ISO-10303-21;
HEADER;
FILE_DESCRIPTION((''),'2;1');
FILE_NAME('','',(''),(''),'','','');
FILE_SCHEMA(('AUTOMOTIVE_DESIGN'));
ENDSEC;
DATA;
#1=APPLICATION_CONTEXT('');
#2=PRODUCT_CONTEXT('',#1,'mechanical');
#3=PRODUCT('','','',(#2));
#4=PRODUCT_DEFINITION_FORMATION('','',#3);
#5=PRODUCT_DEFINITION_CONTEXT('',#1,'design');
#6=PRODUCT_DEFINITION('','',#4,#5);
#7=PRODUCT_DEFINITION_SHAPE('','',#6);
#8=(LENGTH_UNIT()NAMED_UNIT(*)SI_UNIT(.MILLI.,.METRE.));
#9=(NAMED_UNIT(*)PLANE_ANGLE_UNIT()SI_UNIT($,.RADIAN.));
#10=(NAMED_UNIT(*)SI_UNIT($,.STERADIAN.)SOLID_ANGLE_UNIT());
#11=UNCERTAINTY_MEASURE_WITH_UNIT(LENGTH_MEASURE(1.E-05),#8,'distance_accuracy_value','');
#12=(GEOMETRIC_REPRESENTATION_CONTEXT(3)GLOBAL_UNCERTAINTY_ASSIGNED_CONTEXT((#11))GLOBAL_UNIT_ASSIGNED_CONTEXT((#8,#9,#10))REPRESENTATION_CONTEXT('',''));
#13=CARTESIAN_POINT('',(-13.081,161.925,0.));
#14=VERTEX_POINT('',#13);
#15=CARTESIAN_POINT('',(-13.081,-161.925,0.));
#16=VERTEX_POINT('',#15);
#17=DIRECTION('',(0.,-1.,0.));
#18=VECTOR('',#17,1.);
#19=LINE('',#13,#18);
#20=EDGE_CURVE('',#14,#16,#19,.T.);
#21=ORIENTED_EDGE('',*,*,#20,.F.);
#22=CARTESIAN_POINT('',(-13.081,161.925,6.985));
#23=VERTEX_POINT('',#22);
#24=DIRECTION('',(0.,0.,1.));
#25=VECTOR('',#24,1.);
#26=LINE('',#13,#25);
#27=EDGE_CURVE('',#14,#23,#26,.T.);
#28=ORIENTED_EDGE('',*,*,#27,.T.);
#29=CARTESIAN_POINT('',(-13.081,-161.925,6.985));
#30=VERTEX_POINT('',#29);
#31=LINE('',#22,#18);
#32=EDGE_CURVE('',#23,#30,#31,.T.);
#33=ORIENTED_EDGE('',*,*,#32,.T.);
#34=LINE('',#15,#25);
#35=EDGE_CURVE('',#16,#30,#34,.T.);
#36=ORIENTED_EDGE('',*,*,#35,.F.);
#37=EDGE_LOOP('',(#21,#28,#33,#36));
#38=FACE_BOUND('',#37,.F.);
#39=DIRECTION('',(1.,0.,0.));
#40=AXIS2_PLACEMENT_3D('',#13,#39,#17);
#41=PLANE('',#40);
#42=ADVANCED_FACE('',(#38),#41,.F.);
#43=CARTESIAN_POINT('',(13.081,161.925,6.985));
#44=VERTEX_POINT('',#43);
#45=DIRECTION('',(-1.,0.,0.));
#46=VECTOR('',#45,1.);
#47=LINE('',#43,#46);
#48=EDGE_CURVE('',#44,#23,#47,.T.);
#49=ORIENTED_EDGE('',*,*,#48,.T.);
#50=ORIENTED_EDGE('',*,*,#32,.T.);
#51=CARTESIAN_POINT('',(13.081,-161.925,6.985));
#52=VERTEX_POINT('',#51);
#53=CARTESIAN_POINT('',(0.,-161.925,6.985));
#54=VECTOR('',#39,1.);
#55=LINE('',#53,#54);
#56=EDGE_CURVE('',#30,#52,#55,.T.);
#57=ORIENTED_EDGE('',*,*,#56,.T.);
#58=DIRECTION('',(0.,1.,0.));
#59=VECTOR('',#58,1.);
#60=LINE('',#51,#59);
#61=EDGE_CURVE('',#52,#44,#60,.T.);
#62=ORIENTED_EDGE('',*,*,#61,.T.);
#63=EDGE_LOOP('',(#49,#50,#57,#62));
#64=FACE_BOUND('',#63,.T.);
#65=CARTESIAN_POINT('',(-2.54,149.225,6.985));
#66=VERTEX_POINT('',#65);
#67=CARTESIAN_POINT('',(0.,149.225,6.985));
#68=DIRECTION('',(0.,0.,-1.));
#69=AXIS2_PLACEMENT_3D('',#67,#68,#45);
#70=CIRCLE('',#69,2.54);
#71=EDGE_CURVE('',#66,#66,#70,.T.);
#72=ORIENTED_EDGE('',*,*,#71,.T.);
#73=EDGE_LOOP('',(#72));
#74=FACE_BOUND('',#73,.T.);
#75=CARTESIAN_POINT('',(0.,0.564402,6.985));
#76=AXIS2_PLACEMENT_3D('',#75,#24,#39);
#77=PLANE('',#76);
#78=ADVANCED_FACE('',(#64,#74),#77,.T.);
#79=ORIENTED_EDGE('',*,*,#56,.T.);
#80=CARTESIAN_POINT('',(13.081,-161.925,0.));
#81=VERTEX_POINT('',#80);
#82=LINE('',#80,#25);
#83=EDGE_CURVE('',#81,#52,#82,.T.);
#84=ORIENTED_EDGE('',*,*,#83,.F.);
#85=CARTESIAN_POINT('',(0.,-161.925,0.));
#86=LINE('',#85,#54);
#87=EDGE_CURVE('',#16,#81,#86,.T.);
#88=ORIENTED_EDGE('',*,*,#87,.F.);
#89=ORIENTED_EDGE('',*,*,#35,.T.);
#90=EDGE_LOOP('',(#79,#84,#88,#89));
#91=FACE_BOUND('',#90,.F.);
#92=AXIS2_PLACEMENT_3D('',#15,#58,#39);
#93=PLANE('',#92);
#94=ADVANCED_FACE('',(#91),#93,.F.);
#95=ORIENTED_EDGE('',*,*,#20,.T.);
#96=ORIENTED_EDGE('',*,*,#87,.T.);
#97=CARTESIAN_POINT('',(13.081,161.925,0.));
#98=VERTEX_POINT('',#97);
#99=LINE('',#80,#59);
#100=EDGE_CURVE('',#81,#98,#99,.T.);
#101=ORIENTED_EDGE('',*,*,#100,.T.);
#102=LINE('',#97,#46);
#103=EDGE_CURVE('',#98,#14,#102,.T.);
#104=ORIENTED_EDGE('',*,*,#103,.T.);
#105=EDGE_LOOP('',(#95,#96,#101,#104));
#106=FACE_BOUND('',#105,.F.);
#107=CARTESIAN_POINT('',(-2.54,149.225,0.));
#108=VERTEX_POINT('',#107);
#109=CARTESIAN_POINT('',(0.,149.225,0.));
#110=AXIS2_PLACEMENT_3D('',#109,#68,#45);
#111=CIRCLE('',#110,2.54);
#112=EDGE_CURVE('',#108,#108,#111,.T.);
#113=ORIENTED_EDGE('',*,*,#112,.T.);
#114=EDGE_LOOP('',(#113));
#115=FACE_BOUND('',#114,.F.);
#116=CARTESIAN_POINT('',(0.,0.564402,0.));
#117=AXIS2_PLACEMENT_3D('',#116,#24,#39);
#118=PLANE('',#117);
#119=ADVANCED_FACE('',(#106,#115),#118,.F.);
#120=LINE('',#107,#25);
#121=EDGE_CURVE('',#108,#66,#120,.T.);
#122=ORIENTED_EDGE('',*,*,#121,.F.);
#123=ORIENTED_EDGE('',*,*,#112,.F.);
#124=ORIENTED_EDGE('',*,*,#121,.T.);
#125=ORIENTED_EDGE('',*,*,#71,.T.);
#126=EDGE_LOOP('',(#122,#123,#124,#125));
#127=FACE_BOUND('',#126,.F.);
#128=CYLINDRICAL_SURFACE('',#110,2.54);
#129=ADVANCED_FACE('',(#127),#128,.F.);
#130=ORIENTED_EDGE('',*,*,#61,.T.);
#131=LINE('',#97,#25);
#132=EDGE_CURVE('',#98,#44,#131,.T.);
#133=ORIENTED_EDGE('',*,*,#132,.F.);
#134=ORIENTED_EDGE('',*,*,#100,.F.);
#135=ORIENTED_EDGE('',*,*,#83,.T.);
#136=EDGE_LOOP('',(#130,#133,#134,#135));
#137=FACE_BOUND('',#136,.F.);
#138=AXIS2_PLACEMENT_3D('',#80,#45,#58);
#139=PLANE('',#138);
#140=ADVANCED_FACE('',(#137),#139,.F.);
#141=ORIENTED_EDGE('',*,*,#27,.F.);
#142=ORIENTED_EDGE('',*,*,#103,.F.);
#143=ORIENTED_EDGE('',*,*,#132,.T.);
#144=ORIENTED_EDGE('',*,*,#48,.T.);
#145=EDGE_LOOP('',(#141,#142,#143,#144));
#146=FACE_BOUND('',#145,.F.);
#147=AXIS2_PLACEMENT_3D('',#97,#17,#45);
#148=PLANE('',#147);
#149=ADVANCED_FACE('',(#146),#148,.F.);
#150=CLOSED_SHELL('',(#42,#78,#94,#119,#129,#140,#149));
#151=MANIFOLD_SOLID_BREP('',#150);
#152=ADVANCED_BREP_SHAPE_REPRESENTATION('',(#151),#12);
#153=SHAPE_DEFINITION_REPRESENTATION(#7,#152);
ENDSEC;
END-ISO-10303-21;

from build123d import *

# Parameters (mm, degrees)
F0_W     = 26.162
F0_H     = 12.7
F1_DEPTH = 6.985


with BuildPart() as f1:
    # F0 (on Top) → F1 (new body)
    with BuildSketch(Plane.XY):
        with BuildLine():
            Line((13.081, -149.225), (13.081, 149.225))
            Line((13.081, 149.225), (2.54, 149.225))
            ThreePointArc((2.54, 149.225), (0, 146.685), (-2.54, 149.225))
            Line((-2.54, 149.225), (-13.081, 149.225))
            Line((-13.081, 149.225), (-13.081, -149.225))
            Line((-13.081, -149.225), (13.081, -149.225))
        make_face()
        with BuildLine():
            Line((2.54, 149.225), (13.081, 149.225))
            Line((13.081, 149.225), (13.081, 161.925))
            Line((13.081, 161.925), (-13.081, 161.925))
            Line((-13.081, 161.925), (-13.081, 149.225))
            Line((-13.081, 149.225), (-2.54, 149.225))
            ThreePointArc((-2.54, 149.225), (0, 151.765), (2.54, 149.225))
        make_face()
        with Locations((0, -155.575)):
            Rectangle(F0_W, F0_H)
    extrude(amount=F1_DEPTH)


solid = f1.part
